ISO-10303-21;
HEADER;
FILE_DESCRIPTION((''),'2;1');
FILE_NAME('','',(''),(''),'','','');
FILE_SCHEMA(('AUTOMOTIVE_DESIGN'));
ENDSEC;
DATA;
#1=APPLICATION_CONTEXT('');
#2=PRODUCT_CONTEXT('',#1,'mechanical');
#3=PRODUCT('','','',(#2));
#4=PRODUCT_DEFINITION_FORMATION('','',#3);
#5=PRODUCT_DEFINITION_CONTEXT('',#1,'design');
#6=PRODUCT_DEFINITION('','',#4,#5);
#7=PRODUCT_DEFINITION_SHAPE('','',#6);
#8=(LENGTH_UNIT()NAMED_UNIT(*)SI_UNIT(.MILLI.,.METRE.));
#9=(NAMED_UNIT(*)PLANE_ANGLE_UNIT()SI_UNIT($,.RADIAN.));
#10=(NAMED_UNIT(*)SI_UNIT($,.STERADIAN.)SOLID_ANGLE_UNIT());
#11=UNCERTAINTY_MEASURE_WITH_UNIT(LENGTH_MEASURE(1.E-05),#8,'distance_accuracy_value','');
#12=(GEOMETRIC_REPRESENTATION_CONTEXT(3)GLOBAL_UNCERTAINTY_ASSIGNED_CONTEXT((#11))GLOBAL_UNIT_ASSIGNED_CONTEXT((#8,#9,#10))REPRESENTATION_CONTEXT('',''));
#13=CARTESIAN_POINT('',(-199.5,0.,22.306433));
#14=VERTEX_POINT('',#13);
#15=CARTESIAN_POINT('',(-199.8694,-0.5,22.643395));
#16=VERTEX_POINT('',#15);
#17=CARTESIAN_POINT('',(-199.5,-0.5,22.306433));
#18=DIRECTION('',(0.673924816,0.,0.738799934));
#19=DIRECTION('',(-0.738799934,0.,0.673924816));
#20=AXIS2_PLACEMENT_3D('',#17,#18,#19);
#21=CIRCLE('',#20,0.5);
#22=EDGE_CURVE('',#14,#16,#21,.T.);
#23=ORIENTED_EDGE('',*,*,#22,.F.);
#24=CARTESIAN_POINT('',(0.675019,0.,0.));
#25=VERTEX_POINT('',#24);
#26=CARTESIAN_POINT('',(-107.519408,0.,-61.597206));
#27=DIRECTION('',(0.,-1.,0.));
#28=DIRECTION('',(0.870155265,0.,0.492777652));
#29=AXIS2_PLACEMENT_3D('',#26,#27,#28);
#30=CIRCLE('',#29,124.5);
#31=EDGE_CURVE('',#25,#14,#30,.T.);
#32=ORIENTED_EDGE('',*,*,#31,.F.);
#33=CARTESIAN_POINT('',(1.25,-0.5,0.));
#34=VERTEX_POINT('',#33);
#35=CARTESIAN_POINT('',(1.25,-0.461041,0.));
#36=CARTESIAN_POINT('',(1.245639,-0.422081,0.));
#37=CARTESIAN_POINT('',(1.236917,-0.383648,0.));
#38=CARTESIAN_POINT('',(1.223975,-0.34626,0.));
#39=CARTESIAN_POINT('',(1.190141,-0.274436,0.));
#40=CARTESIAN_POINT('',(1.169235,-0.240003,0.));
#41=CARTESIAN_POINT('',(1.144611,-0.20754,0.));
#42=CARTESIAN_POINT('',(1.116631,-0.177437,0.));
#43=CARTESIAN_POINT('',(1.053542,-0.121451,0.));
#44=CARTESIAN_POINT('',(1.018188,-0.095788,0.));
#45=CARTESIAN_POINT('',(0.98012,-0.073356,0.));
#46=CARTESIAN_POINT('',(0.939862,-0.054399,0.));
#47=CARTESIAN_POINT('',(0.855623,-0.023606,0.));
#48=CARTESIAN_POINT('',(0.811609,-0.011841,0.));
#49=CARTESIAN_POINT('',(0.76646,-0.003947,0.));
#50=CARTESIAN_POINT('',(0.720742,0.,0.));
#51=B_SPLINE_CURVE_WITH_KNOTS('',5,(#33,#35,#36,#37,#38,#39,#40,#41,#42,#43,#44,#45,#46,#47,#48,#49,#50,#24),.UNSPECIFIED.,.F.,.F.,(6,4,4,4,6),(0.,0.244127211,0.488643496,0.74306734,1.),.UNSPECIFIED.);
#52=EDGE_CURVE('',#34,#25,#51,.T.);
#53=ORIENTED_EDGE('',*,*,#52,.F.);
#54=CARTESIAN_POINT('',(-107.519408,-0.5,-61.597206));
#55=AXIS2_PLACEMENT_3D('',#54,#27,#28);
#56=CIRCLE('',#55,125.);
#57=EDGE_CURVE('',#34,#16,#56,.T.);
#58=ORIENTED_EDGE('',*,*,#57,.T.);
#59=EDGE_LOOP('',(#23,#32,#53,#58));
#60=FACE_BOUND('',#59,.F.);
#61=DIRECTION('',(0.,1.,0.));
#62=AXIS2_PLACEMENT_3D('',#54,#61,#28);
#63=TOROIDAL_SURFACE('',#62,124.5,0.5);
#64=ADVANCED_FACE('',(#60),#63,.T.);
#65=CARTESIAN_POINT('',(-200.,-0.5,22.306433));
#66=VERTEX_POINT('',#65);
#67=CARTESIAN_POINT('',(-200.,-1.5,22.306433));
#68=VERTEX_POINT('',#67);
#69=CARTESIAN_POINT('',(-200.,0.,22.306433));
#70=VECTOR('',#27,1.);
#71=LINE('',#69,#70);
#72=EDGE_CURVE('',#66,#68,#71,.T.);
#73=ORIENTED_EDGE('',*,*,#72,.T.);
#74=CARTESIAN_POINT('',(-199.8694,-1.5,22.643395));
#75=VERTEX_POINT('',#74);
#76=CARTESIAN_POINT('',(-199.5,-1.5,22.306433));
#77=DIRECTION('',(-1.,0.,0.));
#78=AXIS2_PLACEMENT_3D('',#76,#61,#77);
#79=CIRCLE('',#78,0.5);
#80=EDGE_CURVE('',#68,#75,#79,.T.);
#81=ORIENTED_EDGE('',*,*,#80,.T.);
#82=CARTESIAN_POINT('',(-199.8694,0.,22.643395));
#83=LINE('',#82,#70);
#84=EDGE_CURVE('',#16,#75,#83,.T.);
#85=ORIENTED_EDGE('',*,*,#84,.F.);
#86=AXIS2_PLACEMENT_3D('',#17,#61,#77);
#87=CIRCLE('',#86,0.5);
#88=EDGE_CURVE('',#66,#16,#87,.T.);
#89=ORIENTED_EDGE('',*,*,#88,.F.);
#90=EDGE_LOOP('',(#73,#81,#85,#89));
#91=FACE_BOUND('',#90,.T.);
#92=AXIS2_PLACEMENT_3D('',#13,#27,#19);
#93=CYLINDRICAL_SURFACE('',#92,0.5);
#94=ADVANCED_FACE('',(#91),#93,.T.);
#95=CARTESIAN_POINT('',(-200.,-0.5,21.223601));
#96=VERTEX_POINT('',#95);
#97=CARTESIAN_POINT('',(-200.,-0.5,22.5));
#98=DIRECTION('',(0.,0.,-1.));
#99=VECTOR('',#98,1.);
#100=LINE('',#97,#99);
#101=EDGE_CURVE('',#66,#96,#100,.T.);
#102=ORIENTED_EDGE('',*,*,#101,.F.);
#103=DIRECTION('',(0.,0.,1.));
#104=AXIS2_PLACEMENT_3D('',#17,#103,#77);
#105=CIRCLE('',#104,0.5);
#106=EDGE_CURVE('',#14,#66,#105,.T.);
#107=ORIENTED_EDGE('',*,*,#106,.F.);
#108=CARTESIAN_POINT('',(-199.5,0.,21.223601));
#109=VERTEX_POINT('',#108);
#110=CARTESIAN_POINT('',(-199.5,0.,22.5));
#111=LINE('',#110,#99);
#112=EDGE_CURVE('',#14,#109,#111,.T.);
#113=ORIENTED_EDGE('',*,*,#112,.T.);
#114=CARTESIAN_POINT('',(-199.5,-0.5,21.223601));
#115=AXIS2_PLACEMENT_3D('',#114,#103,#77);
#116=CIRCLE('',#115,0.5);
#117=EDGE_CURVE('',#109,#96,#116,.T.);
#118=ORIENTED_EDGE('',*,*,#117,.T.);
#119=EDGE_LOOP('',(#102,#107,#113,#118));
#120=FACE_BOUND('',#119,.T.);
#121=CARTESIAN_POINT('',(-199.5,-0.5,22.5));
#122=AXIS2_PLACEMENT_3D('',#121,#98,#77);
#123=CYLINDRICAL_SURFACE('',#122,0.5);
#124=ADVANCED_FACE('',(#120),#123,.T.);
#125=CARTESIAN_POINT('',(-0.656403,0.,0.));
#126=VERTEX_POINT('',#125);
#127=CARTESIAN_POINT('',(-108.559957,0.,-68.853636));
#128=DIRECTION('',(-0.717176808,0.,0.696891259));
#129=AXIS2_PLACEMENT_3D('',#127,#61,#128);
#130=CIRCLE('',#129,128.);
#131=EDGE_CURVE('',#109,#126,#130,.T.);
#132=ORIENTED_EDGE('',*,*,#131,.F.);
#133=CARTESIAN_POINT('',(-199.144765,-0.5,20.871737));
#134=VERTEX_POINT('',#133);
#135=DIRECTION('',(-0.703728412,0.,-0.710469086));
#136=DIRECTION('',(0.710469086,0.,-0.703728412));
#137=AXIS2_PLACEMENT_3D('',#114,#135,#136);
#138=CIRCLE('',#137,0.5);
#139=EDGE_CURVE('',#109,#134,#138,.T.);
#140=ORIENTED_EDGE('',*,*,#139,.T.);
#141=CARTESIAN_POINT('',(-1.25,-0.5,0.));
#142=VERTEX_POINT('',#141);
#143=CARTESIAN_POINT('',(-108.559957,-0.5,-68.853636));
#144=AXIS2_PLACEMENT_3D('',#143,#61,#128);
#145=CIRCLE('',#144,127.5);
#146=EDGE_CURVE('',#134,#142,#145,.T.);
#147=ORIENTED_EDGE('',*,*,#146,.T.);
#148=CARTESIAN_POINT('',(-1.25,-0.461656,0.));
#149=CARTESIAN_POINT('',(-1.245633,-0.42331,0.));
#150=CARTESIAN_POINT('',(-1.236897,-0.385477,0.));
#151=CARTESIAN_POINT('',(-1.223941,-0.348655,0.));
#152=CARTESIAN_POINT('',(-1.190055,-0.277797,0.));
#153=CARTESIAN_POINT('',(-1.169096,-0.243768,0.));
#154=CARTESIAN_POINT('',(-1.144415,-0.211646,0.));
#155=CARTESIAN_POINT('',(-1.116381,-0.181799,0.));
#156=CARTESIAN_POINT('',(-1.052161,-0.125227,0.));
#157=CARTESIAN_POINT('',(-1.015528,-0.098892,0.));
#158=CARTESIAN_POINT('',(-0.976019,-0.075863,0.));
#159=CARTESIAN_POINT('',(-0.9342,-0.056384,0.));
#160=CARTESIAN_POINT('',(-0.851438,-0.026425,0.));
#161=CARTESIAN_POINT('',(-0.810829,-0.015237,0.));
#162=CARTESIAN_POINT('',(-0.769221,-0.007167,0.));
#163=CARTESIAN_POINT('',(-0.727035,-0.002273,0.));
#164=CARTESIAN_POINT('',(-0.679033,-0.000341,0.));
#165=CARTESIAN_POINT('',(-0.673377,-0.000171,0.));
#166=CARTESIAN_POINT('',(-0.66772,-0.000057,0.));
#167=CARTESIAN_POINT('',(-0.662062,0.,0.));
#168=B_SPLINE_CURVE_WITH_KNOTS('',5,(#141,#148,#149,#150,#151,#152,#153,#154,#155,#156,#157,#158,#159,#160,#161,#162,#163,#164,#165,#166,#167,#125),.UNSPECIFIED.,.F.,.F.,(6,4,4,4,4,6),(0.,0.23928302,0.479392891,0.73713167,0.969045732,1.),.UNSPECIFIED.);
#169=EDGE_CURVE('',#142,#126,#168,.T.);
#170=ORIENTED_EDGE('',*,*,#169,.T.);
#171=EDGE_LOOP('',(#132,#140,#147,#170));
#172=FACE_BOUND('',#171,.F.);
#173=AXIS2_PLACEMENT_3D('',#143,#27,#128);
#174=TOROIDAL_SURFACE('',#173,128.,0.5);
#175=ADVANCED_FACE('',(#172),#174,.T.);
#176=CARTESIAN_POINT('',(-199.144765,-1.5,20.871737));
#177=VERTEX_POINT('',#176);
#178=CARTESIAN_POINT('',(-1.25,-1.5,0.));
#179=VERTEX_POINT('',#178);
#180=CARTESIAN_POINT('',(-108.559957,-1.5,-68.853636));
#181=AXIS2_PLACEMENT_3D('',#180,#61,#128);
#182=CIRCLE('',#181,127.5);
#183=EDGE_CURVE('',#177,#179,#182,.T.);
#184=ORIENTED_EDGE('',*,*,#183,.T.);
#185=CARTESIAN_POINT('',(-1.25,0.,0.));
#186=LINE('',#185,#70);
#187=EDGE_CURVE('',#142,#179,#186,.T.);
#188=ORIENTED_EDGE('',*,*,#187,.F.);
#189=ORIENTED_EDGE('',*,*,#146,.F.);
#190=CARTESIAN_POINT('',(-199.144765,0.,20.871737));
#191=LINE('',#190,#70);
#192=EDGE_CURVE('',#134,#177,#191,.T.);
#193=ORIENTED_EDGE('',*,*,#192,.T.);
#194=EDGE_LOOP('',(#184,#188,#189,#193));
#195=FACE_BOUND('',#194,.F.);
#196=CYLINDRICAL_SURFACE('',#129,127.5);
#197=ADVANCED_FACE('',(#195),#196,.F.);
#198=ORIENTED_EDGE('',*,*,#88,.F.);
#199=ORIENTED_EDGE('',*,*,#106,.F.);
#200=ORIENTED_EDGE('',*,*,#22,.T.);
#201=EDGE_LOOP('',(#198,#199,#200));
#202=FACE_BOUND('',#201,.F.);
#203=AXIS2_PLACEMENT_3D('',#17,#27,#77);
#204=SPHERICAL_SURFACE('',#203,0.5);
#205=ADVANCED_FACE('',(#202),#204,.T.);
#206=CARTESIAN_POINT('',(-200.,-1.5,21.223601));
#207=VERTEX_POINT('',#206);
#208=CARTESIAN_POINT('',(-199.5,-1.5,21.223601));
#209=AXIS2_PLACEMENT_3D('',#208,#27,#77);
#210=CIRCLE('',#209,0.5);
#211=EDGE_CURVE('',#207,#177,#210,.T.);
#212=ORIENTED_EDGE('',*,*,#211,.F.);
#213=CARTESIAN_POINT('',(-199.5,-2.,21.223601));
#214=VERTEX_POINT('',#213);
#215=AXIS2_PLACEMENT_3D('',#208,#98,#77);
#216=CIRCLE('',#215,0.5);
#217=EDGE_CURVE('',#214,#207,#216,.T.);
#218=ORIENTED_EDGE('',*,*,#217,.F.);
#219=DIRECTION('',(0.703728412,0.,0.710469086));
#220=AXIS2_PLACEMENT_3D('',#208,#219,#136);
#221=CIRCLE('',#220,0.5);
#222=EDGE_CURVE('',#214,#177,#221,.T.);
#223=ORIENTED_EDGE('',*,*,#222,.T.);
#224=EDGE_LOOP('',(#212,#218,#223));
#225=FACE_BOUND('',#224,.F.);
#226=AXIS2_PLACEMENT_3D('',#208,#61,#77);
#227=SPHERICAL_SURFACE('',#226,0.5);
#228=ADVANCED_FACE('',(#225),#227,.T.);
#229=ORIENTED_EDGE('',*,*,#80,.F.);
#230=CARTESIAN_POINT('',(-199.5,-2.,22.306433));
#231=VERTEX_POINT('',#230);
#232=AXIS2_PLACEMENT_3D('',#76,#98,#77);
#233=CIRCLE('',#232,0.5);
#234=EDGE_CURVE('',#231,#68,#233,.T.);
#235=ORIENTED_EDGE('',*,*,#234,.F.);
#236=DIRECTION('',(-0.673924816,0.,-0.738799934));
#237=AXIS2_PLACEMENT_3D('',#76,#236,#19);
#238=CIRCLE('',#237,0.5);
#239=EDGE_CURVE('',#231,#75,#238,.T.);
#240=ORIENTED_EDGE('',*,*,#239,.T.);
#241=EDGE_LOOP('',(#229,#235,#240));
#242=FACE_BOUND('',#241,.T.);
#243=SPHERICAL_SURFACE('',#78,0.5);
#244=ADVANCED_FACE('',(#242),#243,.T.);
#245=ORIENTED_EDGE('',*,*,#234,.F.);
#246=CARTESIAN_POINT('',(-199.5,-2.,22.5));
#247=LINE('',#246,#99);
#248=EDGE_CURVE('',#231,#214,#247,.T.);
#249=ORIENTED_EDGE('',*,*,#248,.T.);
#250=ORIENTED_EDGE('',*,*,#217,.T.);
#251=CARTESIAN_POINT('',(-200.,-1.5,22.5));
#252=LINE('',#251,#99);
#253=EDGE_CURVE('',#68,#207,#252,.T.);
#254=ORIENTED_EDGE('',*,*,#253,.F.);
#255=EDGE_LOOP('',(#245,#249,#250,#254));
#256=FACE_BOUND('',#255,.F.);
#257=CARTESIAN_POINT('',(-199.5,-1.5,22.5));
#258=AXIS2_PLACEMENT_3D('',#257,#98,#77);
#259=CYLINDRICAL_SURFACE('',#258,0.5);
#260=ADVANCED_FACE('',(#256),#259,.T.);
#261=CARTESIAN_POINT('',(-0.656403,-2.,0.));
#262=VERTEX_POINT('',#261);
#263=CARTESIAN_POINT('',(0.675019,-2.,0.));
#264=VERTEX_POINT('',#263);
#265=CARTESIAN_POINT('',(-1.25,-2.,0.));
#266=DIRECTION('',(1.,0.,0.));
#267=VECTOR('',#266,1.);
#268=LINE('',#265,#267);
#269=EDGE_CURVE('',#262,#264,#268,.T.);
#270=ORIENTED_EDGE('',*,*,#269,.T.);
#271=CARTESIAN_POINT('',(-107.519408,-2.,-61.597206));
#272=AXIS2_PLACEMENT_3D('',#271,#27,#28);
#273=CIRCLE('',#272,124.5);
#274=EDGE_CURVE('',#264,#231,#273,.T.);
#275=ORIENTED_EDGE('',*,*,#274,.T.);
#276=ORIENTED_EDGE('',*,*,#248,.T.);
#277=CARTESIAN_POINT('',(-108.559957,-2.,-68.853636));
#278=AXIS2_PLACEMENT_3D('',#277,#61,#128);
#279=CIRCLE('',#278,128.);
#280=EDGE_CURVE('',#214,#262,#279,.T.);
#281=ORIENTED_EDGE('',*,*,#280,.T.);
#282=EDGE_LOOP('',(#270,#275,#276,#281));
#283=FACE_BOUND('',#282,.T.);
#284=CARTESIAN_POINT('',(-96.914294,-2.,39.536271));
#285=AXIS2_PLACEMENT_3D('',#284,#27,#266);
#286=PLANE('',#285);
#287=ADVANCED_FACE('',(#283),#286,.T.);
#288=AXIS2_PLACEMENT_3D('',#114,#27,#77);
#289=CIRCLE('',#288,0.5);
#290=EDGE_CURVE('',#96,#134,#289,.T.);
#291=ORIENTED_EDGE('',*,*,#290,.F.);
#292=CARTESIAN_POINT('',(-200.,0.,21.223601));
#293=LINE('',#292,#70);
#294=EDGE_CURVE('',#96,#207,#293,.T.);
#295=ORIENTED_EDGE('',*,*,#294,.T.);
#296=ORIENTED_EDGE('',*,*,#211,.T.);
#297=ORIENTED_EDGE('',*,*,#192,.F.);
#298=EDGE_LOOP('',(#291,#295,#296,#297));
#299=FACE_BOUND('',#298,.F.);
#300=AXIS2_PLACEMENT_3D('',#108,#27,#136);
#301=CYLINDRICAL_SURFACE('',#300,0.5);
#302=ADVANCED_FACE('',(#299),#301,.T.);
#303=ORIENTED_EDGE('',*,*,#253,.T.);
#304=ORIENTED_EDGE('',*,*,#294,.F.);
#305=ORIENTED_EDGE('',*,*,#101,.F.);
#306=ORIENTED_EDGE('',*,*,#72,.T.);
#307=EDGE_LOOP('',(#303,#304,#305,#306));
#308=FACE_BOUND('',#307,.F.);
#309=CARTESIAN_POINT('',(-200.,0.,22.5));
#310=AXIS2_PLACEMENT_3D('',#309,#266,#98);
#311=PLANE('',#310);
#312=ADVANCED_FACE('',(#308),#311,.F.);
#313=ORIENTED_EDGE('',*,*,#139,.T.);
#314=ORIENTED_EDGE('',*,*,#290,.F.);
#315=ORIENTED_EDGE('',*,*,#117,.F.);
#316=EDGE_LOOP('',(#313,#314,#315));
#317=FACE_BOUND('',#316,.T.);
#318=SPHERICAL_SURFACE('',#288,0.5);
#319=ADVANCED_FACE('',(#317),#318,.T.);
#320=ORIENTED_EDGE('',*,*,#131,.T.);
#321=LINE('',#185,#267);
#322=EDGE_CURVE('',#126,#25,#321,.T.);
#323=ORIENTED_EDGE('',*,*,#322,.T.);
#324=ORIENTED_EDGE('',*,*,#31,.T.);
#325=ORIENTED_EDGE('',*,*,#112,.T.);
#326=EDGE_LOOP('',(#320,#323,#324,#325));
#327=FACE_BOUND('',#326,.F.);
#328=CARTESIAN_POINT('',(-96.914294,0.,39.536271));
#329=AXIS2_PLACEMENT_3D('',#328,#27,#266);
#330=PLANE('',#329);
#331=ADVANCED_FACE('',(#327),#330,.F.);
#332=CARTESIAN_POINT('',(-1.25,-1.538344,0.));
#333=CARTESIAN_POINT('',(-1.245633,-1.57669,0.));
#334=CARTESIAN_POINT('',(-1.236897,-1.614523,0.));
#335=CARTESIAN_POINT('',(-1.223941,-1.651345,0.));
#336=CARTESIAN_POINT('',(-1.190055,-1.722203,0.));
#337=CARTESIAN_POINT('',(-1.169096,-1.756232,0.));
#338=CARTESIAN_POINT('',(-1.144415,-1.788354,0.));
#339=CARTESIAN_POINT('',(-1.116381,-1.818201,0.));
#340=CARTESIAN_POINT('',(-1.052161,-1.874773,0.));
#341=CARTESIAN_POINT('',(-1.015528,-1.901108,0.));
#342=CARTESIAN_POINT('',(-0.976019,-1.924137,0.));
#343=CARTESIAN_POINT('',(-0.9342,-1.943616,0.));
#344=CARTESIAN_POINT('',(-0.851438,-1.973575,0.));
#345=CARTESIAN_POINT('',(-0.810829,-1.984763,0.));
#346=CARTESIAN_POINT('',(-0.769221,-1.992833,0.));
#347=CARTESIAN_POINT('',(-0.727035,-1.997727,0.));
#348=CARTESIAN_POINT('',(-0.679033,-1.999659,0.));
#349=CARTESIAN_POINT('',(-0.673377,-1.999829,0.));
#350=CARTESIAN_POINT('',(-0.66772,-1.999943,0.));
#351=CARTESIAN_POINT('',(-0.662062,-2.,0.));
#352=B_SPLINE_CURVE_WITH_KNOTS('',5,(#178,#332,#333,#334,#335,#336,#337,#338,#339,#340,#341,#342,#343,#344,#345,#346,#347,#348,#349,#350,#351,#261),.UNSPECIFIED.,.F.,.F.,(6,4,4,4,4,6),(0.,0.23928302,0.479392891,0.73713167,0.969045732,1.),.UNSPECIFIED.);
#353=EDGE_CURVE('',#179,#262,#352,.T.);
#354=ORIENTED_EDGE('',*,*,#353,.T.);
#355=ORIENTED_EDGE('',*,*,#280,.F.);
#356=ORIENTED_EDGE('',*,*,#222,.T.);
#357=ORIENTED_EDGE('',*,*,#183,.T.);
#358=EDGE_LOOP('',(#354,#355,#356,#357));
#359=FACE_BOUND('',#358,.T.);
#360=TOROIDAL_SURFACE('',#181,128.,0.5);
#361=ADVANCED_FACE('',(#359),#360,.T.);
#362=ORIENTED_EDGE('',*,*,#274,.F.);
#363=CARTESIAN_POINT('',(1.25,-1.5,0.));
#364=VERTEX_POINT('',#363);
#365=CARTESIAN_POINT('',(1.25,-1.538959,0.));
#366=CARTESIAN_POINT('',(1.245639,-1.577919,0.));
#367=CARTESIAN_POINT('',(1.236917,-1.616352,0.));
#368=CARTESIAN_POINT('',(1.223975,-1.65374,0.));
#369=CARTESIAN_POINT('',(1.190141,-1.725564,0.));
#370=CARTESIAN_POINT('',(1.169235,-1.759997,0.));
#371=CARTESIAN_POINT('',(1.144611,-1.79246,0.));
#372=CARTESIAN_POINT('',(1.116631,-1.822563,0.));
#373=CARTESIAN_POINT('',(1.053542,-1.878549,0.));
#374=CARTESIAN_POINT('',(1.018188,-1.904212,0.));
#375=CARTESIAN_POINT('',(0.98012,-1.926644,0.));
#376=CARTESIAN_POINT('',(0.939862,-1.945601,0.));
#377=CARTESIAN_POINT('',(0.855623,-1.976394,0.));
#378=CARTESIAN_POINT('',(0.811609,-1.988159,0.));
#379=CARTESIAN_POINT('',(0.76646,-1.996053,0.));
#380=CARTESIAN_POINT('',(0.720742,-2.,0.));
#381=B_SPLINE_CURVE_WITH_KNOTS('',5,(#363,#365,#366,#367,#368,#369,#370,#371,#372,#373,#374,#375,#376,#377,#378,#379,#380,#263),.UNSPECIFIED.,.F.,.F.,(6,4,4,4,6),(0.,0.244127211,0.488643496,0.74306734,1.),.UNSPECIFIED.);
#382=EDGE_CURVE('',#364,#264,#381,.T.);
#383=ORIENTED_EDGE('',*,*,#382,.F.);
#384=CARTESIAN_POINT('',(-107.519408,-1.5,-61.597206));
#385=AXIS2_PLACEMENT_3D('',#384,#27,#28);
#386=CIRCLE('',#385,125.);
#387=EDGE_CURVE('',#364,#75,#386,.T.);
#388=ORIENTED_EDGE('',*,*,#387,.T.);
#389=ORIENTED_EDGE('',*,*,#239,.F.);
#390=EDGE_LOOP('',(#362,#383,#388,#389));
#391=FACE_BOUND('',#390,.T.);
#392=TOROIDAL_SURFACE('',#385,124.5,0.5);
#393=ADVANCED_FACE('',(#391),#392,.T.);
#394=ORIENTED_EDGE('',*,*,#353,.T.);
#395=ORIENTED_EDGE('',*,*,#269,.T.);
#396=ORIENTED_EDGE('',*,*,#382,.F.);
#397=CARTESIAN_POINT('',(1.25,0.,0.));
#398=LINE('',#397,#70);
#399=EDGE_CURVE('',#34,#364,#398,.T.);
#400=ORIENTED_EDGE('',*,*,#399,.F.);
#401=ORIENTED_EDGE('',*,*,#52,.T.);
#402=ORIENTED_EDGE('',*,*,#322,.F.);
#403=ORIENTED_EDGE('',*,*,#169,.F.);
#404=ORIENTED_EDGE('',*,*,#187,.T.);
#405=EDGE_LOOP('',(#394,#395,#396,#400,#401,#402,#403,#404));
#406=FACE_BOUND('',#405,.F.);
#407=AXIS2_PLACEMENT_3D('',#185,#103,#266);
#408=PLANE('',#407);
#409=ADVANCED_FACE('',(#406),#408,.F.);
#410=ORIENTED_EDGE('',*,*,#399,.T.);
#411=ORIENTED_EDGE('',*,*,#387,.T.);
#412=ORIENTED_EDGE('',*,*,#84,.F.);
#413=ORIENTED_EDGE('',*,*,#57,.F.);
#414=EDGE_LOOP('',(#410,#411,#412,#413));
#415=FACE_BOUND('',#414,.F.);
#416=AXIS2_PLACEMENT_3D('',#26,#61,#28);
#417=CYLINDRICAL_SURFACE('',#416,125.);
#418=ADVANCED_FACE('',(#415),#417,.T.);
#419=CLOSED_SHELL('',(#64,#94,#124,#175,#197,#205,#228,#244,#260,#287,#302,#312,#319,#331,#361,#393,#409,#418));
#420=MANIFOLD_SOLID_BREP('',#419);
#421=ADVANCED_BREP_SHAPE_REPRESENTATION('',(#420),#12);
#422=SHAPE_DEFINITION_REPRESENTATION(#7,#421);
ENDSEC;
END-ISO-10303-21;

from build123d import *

# Parameters (mm, degrees)
F1_DEPTH = 2
F3_R     = 0.5


# Not quite as in the source:
# - a feature of the source that left no trace in its solid (it failed there, or was rolled back) is left out


with BuildPart() as f1:
    # F0 (on Front) → F1 (new body)
    with BuildSketch(Plane.XZ):
        with BuildLine():
            ThreePointArc((-200, 20), (-95.7942395393, 58.005682078), (-1.25, 0))
            Line((-1.25, 0), (1.25, 0))
            ThreePointArc((1.25, 0), (-93.630783891, 62.6288218635), (-200, 22.5))
            Line((-200, 22.5), (-200, 20))
        make_face()
    extrude(amount=F1_DEPTH)

    # F3
    f3_edges = [f1.edges().sort_by_distance(p)[0] for p in [
        (-200, -1, 22.5),
        (-200, -1, 20),
        (-200, 0, 21.25),
        (-200, -2, 21.25),
        (-93.630784, 0, 62.628822),
        (-93.630784, -2, 62.628822),
        (-95.79424, 0, 58.005682),
        (-95.79424, -2, 58.005682),
    ]]
    fillet(f3_edges, radius=F3_R)


solid = f1.part
